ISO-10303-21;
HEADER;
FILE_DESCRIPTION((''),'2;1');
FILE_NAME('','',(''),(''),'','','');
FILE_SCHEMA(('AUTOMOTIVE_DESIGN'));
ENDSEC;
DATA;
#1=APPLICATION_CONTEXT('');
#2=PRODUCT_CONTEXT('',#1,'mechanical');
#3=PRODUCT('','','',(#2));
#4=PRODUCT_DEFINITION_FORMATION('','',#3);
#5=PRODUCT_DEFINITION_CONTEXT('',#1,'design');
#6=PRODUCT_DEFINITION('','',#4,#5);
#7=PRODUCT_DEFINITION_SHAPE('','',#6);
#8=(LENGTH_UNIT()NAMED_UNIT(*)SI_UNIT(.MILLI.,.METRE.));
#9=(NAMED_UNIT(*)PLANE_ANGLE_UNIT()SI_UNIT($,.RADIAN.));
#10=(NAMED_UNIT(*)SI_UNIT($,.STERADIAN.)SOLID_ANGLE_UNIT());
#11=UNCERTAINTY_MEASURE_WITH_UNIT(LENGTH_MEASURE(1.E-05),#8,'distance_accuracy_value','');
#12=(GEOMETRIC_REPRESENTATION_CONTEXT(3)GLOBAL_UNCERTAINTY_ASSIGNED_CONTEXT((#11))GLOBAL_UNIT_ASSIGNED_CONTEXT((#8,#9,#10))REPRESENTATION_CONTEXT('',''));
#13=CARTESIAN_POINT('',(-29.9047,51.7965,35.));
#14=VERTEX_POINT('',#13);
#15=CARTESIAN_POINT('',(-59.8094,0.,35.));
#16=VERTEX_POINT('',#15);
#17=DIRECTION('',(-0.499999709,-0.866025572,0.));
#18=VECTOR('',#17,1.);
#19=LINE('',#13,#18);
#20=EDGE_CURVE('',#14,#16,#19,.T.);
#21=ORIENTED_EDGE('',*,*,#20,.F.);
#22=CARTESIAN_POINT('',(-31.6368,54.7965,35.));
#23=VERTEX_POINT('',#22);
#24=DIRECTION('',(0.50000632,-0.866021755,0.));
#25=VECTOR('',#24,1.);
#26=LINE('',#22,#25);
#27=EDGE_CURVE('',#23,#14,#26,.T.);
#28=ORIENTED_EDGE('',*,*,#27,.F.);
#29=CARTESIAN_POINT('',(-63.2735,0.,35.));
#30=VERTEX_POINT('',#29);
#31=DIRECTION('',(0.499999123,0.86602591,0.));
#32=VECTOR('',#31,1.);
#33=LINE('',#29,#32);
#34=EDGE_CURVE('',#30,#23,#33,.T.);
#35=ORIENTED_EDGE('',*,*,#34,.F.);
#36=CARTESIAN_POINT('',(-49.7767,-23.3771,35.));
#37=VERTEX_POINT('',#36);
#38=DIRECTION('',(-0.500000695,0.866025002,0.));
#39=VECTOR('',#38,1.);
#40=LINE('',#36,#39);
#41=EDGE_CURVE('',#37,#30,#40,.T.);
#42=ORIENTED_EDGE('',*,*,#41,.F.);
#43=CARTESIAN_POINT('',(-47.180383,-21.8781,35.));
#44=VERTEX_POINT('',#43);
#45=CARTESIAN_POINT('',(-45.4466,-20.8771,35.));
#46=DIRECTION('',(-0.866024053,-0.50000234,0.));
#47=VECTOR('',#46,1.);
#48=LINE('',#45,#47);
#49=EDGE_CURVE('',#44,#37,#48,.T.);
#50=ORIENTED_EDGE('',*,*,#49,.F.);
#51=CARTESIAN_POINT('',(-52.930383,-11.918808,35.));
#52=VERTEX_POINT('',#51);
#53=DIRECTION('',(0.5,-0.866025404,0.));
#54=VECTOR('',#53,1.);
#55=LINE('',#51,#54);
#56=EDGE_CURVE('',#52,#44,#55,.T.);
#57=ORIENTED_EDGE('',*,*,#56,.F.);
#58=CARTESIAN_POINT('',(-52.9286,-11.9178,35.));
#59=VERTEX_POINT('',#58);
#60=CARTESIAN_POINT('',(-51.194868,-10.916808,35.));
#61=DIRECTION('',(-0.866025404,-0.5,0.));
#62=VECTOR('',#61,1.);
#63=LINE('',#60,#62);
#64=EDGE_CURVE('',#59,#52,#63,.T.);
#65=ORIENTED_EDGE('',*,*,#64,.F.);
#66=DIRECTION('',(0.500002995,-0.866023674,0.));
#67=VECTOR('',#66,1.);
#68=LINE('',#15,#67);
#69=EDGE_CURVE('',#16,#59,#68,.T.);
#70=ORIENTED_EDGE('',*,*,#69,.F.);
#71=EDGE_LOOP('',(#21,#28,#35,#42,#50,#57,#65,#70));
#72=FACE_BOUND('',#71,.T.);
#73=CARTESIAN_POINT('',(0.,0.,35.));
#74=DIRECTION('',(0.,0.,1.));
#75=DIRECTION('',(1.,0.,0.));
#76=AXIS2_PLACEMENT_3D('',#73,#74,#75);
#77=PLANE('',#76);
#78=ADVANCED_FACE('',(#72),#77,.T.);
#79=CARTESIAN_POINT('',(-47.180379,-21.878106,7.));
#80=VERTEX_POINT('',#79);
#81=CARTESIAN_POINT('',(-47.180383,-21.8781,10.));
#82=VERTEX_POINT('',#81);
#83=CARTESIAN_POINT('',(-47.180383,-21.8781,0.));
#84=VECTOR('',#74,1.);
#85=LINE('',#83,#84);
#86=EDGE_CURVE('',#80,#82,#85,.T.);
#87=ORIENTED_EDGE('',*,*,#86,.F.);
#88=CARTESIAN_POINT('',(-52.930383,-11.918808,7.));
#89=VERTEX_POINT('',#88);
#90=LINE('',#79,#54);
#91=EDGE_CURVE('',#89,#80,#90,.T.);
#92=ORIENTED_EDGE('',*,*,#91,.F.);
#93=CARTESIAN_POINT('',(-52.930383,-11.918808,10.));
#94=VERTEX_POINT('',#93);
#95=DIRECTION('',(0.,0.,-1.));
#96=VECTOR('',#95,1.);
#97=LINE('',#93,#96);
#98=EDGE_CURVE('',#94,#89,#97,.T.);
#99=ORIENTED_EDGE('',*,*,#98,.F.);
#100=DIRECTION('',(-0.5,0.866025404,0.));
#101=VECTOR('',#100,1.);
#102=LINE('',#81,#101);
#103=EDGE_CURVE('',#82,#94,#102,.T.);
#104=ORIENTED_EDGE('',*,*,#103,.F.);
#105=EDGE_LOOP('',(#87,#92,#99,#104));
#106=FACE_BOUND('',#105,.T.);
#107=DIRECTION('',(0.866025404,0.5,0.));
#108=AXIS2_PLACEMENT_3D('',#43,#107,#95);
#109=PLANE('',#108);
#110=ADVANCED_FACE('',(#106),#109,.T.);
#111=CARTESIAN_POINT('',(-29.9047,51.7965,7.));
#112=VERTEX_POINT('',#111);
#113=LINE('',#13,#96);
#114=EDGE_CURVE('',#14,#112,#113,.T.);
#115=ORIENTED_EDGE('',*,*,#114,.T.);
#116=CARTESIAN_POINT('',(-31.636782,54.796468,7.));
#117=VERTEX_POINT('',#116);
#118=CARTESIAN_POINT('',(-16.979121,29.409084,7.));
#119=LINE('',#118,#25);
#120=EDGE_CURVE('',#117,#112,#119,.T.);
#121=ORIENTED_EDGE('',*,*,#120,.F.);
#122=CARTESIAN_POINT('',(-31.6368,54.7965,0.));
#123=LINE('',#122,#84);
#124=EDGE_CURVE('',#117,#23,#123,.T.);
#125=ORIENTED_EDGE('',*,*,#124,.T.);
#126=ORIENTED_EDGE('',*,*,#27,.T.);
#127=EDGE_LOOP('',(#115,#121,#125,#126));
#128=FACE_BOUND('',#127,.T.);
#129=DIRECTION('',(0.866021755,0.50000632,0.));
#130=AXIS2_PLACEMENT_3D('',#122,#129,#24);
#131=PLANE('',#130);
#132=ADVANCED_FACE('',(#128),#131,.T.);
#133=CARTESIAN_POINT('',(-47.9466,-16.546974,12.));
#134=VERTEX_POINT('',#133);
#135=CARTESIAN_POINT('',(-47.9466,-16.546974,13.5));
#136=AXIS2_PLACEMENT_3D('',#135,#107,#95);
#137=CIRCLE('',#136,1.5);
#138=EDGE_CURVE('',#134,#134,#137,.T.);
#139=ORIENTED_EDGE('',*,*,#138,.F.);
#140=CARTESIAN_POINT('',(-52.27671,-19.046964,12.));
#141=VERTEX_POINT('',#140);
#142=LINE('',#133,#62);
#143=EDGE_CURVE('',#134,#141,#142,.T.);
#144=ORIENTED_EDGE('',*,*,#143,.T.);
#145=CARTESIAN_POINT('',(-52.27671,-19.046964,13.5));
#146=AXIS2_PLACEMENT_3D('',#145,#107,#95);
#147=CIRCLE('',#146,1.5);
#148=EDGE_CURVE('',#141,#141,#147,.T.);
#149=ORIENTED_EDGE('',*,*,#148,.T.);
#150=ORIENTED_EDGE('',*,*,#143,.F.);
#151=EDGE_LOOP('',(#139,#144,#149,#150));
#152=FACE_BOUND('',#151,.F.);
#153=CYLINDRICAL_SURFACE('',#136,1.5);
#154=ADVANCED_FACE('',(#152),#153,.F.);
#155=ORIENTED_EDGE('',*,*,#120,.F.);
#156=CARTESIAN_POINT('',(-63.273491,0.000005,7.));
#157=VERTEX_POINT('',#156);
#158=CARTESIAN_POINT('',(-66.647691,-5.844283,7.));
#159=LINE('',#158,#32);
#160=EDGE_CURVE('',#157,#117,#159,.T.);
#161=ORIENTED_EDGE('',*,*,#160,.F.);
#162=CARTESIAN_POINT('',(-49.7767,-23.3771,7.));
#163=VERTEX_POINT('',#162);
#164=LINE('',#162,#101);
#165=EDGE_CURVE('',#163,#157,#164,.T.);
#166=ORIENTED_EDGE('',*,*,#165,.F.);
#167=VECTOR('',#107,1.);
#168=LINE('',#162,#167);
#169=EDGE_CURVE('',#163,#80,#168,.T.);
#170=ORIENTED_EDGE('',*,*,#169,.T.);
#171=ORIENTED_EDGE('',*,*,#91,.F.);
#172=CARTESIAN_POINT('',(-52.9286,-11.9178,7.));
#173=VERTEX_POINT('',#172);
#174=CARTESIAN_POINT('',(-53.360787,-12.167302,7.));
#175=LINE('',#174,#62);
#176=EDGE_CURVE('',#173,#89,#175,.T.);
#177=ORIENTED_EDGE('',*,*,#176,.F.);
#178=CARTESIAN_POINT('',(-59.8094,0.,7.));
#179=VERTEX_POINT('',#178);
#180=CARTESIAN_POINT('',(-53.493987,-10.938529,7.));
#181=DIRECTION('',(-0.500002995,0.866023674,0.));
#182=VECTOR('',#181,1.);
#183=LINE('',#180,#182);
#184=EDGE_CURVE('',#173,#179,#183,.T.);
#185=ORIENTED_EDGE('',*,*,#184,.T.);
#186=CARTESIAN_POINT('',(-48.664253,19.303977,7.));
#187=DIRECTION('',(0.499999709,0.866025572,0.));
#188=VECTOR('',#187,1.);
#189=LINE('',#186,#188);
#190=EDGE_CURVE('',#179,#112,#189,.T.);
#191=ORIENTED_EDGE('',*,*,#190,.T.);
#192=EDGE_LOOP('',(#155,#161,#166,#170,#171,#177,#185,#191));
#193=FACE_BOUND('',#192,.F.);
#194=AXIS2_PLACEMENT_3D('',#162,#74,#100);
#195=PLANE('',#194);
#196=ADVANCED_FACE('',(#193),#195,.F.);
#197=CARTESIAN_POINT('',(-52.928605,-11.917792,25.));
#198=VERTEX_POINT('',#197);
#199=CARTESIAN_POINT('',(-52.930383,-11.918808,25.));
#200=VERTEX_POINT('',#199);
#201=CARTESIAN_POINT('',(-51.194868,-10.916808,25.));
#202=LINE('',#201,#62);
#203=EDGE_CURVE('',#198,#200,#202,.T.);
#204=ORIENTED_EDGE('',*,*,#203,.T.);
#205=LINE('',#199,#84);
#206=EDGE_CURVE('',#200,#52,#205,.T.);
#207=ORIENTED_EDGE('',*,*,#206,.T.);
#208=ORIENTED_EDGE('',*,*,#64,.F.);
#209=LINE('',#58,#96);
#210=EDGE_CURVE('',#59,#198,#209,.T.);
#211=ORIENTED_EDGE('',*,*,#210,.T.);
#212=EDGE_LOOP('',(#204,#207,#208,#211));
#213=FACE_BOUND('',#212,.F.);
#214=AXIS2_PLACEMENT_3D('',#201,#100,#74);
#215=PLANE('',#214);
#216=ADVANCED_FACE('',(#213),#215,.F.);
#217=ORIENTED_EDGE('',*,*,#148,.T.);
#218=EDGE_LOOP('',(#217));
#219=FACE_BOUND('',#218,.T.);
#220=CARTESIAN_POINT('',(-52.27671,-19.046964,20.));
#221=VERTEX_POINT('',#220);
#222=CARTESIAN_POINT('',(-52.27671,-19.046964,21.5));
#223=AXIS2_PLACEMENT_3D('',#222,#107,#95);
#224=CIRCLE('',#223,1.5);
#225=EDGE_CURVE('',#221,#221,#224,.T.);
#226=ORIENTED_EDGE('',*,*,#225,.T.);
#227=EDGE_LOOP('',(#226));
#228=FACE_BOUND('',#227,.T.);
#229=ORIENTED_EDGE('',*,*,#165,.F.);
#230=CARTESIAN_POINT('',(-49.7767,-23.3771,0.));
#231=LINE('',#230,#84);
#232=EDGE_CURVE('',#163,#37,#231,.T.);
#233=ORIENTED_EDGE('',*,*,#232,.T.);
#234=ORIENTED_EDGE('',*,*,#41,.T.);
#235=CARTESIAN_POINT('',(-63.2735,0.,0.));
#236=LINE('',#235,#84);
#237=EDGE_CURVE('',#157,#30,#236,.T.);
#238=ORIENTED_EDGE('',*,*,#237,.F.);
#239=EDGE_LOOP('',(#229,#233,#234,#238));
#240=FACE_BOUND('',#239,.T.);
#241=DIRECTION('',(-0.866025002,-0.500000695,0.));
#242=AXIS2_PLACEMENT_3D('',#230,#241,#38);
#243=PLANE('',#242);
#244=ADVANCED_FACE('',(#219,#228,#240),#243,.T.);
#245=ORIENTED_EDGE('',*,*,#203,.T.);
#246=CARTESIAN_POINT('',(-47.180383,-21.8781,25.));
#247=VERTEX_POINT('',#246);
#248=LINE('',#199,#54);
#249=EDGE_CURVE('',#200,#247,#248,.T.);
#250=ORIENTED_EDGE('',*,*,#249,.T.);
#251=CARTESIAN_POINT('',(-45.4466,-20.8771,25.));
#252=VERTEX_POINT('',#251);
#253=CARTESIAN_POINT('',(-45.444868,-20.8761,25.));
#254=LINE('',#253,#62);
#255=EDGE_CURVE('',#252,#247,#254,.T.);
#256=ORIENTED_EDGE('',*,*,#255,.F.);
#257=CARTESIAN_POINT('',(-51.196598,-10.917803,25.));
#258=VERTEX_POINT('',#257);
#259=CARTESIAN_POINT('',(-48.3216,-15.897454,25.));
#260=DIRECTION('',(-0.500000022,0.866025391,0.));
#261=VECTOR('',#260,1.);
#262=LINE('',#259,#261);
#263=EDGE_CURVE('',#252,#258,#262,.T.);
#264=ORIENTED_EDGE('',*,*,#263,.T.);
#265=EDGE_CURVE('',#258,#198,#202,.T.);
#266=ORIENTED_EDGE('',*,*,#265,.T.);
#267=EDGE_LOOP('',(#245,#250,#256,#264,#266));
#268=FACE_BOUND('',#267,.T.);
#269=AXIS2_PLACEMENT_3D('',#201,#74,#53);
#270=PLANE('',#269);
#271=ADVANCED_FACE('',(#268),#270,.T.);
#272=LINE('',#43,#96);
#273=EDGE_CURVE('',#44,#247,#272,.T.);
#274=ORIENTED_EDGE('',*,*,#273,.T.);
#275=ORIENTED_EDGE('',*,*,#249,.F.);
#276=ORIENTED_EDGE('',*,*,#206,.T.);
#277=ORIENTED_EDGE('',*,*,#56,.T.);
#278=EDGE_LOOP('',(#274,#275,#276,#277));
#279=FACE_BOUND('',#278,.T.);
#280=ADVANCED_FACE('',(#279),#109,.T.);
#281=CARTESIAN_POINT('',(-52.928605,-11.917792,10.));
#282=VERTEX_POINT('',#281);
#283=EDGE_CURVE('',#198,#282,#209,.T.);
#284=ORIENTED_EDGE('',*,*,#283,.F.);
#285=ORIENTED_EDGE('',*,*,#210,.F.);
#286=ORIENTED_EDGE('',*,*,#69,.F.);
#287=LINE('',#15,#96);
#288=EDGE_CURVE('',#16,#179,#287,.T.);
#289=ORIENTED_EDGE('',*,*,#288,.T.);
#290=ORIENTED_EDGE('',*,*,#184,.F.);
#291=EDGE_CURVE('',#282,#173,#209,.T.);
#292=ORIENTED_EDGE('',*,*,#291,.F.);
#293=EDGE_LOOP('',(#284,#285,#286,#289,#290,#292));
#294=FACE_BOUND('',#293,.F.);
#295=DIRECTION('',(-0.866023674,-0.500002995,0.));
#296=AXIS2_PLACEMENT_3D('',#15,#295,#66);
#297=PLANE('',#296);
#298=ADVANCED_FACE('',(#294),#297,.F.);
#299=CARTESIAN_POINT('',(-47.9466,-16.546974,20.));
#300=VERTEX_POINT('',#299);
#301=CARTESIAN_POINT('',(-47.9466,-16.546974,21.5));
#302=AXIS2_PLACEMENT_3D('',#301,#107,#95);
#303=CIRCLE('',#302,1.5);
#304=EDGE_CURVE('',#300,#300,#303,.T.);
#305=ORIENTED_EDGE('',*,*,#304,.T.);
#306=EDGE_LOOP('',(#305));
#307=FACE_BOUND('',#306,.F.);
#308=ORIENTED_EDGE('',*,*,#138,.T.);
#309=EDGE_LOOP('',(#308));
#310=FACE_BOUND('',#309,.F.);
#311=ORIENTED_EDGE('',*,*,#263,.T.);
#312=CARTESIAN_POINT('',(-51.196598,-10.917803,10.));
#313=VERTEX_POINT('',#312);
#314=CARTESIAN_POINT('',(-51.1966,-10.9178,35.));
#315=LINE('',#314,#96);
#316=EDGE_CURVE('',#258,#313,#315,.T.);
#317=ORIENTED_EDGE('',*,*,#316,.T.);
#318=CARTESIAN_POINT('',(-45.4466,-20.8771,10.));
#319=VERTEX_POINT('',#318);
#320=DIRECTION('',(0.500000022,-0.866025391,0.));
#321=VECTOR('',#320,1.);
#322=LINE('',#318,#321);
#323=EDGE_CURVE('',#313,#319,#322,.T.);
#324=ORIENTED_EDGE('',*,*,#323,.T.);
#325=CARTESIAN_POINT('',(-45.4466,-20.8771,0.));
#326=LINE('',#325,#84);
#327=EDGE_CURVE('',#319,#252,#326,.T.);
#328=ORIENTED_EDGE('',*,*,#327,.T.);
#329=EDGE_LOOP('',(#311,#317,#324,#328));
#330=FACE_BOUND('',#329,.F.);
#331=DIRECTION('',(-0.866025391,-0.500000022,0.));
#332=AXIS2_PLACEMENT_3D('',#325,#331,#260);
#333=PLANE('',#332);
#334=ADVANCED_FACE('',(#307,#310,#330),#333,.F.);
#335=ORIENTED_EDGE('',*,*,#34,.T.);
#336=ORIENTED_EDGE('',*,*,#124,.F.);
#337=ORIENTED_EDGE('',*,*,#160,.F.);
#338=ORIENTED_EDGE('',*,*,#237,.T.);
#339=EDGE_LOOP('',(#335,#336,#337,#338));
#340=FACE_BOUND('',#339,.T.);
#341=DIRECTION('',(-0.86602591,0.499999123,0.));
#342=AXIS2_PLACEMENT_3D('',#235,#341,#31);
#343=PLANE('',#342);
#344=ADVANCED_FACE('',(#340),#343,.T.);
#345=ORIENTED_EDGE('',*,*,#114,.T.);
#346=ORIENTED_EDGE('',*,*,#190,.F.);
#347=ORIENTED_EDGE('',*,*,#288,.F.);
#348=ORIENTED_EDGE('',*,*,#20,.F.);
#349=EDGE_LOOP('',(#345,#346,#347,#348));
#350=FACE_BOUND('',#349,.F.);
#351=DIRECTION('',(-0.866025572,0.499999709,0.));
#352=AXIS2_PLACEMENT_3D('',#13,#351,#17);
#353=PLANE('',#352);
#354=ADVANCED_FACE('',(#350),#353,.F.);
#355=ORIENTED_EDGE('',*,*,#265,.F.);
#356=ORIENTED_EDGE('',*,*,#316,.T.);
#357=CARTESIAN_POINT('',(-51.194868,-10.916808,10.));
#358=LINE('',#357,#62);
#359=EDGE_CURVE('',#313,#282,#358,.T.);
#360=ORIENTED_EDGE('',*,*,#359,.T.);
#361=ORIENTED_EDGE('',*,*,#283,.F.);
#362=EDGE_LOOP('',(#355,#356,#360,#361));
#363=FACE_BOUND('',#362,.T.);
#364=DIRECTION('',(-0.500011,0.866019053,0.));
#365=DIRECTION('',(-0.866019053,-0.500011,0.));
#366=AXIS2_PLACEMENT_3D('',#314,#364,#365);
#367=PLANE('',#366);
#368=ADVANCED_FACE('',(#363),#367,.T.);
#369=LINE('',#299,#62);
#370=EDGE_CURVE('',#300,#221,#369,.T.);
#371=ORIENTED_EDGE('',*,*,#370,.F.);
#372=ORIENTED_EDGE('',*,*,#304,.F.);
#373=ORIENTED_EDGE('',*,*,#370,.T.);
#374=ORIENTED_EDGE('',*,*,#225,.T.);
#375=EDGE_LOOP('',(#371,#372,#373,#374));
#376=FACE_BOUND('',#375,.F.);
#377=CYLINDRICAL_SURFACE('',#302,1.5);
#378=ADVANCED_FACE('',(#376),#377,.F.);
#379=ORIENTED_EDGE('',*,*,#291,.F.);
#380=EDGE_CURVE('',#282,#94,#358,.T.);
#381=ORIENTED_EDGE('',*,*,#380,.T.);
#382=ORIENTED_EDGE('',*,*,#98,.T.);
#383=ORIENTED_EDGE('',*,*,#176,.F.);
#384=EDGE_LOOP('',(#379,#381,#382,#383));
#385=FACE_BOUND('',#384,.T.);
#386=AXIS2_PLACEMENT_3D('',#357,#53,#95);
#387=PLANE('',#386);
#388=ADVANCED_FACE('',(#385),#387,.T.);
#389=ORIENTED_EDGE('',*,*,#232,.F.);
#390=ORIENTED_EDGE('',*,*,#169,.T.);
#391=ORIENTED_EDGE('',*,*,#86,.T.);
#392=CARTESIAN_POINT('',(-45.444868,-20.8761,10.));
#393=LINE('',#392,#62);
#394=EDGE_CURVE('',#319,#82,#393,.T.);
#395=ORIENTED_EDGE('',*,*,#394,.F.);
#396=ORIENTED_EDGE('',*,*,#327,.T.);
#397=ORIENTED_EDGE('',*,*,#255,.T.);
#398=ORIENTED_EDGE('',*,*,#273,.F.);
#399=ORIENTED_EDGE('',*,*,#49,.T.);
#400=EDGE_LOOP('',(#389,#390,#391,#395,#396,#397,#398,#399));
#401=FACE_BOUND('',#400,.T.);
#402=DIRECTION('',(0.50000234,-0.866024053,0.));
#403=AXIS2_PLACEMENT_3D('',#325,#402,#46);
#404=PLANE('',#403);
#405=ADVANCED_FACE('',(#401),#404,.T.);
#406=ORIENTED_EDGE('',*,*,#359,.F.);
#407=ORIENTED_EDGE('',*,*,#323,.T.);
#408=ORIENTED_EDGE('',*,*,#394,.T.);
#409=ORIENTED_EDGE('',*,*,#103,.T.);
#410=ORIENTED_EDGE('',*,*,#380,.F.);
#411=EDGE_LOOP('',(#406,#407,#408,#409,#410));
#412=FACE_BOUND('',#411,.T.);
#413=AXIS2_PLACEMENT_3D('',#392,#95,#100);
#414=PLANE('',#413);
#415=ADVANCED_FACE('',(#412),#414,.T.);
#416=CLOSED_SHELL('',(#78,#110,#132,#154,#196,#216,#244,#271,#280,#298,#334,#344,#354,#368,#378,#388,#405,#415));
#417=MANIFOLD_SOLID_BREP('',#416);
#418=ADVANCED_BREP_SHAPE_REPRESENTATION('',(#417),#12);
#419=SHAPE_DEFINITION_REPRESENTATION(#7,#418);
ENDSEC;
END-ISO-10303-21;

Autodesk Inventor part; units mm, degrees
ref_plane "YZ Plane" through (0, 0, 0) normal (1, 0, 0) x (0, 1, 0)
ref_plane "XZ Plane" through (0, 0, 0) normal (0, 1, 0) x (-1, 0, 0)
ref_plane "XY Plane" through (0, 0, 0) normal (0, 0, 1) x (1, 0, 0)
sketch "Sketch1" plane through (0, 0, 0) normal (0, 0, 1) x (1, 0, 0)
  line L0 (57.5, 0) -> (28.75, -49.7965) construction
  line L1 (28.75, -49.7965) -> (-28.75, -49.7965) construction
  line L2 (-28.75, -49.7965) -> (-57.5, 0) construction
  line L3 (-57.5, 0) -> (-28.75, 49.7965) construction
  line L4 (-28.75, 49.7965) -> (28.75, 49.7965) construction
  line L5 (28.75, 49.7965) -> (57.5, 0) construction
  line L6 (-31.6368, 54.7965) -> (-63.2735, 0) construction
  line L7 (-63.2735, 0) -> (-31.6368, -54.7965) construction
  line L8 (-31.6368, -54.7965) -> (31.6368, -54.7965) construction
  line L9 (31.6368, -54.7965) -> (63.2735, 0) construction
  line L10 (63.2735, 0) -> (31.6368, 54.7965) construction
  line L11 (31.6368, 54.7965) -> (-31.6368, 54.7965) construction
  line L12 (-47.9466, -16.547) -> (-52.2767, -19.047) construction
  line L13 (-45.4466, -20.8771) -> (-49.7767, -23.3771)
  line L14 (-45.4466, -20.8771) -> (-57.5, 0)
  line L15 (-49.7767, -23.3771) -> (-63.2735, 0)
  line L16 (-63.2735, 0) -> (-31.6368, 54.7965)
  line L17 (-31.6368, 54.7965) -> (-28.75, 49.7965)
  line L18 (-28.75, 49.7965) -> (-57.5, 0)
  point P0 (0, 0)
  point P1 (0, 0)
  dimension "d0" = 115
  dimension "d1" = 5
  dimension "d2" = 19.1068
  dimension "d3" = 5
extrude "Extrusion1" add sketch "Sketch1" along normal blind 35
sketch "Sketch2" plane through (-57.5, 0, 35) normal (0.8660254, 0.5, 0) x (0, 0, -1)
  circle A0 centre (17.5, -19.1068) radius 1.5 construction
  line L0 (35, -24.1068) -> (0, -24.1068) projected
  line L1 (21.5, -19.1068) -> (13.5, -19.1068) construction
  circle A1 centre (21.5, -19.1068) radius 1.5
  circle A2 centre (13.5, -19.1068) radius 1.5
  point P0 (35, -28.75)
  point P1 (17.5, -24.1068)
  dimension "d6" = 3
  dimension "d7" = 5
  dimension "d14" = 8
  dimension "d15" = 3
  dimension "d16" = 3
extrude "Extrusion2" cut sketch "Sketch2" against normal through all
sketch "Sketch3" plane through (0, 0, 35) normal (0, 0, 1) x (1, 0, 0)
  line L0 (-45.4466, -20.8771) -> (-57.5, 0) construction
  line L1 (-57.5, 0) -> (-28.75, 49.7965) construction
  line L2 (-30.4821, 50.7965) -> (-59.8094, 0) construction
  line L3 (-59.8094, 0) -> (-47.1786, -21.8771) construction
  line L4 (-51.5267, -20.346) -> (-53.0267, -17.7479) construction
  line L5 (-48.6966, -15.2479) -> (-47.1966, -17.846) construction
  line L6 (-51.1966, -10.9178) -> (-52.9286, -11.9178)
  line L7 (-51.1966, -10.9178) -> (-57.5, 0)
  line L8 (-57.5, 0) -> (-28.75, 49.7965)
  line L9 (-28.75, 49.7965) -> (-29.9047, 51.7965)
  line L10 (-28.75, 49.7965) -> (-31.6368, 54.7965) projected
  line L11 (-29.9047, 51.7965) -> (-59.8094, 0)
  line L12 (-59.8094, 0) -> (-52.9286, -11.9178)
  line L13 (-49.7767, -23.3771) -> (-45.4466, -20.8771) projected
  point P0 (0, 0)
  dimension "d10" = 2
  dimension "d17" = 11.5
extrude "Extrusion3" cut sketch "Sketch3" against normal through all
sketch "Sketch4" plane through (-45.4466, -20.8771, 35) normal (0.8660254, 0.5, 0) x (0, 0, -1)
  line L0 (35, 0) -> (0, 0) construction
  line L1 (35, 11.5) -> (0, 11.5) construction
  line L2 (10, 0) -> (25, 0)
  line L3 (25, 0) -> (25, 11.5)
  line L4 (25, 11.5) -> (10, 11.5)
  line L5 (10, 11.5) -> (10, 0)
  circle A0 centre (13.5, 5) radius 1.5 construction
  line L6 (13.5, 5) -> (21.5, 5) construction
  circle A1 centre (21.5, 5) radius 1.5 construction
  line L7 (10, 11.5) -> (0, 11.5)
  line L8 (0, 11.5) -> (0, 0)
  line L9 (0, 0) -> (10, 0)
  line L10 (10, 0) -> (10, 11.5)
  line L11 (35, 11.5) -> (35, 0) projected
  line L12 (25, 11.5) -> (35, 11.5)
  line L13 (35, 11.5) -> (35, 0)
  line L14 (35, 0) -> (25, 0)
  line L15 (25, 0) -> (25, 11.5)
  point P0 (35, -4.6432)
  point P1 (17.5, 5)
  point P2 (17.5, 11.5)
  point P3 (17.5, 11.5)
  dimension "d18" = 15
extrude "Extrusion4" cut sketch "Sketch4" against normal blind 2 contours L9 L8 L7 L5 | L3 L12 L11 L14
sketch "Sketch5" plane through (-49.7767, -23.3771, 0) normal (-0.8660254, -0.5, 0) x (0, 0, 1)
  line L0 (0, 0) -> (35, 0) projected
  line L1 (0, 58.6303) -> (35, 58.6303) projected
  line L2 (35, 0) -> (28, 0)
  line L3 (28, 0) -> (28, 58.6303)
  line L4 (28, 58.6303) -> (35, 58.6303)
  line L5 (35, 58.6303) -> (35, 0)
  line L6 (0, 0) -> (7, 0)
  line L7 (7, 0) -> (7, 58.6303)
  line L8 (7, 58.6303) -> (0, 58.6303)
  line L9 (0, 58.6303) -> (0, 0)
  point P0 (0, -4.6432)
  dimension "d21" = 7
  dimension "d24" = 7
extrude "Extrusion5" cut sketch "Sketch5" against normal through all contours L9 L1 L7 L0
properties part number "TA09" material "ABS Plastic"
